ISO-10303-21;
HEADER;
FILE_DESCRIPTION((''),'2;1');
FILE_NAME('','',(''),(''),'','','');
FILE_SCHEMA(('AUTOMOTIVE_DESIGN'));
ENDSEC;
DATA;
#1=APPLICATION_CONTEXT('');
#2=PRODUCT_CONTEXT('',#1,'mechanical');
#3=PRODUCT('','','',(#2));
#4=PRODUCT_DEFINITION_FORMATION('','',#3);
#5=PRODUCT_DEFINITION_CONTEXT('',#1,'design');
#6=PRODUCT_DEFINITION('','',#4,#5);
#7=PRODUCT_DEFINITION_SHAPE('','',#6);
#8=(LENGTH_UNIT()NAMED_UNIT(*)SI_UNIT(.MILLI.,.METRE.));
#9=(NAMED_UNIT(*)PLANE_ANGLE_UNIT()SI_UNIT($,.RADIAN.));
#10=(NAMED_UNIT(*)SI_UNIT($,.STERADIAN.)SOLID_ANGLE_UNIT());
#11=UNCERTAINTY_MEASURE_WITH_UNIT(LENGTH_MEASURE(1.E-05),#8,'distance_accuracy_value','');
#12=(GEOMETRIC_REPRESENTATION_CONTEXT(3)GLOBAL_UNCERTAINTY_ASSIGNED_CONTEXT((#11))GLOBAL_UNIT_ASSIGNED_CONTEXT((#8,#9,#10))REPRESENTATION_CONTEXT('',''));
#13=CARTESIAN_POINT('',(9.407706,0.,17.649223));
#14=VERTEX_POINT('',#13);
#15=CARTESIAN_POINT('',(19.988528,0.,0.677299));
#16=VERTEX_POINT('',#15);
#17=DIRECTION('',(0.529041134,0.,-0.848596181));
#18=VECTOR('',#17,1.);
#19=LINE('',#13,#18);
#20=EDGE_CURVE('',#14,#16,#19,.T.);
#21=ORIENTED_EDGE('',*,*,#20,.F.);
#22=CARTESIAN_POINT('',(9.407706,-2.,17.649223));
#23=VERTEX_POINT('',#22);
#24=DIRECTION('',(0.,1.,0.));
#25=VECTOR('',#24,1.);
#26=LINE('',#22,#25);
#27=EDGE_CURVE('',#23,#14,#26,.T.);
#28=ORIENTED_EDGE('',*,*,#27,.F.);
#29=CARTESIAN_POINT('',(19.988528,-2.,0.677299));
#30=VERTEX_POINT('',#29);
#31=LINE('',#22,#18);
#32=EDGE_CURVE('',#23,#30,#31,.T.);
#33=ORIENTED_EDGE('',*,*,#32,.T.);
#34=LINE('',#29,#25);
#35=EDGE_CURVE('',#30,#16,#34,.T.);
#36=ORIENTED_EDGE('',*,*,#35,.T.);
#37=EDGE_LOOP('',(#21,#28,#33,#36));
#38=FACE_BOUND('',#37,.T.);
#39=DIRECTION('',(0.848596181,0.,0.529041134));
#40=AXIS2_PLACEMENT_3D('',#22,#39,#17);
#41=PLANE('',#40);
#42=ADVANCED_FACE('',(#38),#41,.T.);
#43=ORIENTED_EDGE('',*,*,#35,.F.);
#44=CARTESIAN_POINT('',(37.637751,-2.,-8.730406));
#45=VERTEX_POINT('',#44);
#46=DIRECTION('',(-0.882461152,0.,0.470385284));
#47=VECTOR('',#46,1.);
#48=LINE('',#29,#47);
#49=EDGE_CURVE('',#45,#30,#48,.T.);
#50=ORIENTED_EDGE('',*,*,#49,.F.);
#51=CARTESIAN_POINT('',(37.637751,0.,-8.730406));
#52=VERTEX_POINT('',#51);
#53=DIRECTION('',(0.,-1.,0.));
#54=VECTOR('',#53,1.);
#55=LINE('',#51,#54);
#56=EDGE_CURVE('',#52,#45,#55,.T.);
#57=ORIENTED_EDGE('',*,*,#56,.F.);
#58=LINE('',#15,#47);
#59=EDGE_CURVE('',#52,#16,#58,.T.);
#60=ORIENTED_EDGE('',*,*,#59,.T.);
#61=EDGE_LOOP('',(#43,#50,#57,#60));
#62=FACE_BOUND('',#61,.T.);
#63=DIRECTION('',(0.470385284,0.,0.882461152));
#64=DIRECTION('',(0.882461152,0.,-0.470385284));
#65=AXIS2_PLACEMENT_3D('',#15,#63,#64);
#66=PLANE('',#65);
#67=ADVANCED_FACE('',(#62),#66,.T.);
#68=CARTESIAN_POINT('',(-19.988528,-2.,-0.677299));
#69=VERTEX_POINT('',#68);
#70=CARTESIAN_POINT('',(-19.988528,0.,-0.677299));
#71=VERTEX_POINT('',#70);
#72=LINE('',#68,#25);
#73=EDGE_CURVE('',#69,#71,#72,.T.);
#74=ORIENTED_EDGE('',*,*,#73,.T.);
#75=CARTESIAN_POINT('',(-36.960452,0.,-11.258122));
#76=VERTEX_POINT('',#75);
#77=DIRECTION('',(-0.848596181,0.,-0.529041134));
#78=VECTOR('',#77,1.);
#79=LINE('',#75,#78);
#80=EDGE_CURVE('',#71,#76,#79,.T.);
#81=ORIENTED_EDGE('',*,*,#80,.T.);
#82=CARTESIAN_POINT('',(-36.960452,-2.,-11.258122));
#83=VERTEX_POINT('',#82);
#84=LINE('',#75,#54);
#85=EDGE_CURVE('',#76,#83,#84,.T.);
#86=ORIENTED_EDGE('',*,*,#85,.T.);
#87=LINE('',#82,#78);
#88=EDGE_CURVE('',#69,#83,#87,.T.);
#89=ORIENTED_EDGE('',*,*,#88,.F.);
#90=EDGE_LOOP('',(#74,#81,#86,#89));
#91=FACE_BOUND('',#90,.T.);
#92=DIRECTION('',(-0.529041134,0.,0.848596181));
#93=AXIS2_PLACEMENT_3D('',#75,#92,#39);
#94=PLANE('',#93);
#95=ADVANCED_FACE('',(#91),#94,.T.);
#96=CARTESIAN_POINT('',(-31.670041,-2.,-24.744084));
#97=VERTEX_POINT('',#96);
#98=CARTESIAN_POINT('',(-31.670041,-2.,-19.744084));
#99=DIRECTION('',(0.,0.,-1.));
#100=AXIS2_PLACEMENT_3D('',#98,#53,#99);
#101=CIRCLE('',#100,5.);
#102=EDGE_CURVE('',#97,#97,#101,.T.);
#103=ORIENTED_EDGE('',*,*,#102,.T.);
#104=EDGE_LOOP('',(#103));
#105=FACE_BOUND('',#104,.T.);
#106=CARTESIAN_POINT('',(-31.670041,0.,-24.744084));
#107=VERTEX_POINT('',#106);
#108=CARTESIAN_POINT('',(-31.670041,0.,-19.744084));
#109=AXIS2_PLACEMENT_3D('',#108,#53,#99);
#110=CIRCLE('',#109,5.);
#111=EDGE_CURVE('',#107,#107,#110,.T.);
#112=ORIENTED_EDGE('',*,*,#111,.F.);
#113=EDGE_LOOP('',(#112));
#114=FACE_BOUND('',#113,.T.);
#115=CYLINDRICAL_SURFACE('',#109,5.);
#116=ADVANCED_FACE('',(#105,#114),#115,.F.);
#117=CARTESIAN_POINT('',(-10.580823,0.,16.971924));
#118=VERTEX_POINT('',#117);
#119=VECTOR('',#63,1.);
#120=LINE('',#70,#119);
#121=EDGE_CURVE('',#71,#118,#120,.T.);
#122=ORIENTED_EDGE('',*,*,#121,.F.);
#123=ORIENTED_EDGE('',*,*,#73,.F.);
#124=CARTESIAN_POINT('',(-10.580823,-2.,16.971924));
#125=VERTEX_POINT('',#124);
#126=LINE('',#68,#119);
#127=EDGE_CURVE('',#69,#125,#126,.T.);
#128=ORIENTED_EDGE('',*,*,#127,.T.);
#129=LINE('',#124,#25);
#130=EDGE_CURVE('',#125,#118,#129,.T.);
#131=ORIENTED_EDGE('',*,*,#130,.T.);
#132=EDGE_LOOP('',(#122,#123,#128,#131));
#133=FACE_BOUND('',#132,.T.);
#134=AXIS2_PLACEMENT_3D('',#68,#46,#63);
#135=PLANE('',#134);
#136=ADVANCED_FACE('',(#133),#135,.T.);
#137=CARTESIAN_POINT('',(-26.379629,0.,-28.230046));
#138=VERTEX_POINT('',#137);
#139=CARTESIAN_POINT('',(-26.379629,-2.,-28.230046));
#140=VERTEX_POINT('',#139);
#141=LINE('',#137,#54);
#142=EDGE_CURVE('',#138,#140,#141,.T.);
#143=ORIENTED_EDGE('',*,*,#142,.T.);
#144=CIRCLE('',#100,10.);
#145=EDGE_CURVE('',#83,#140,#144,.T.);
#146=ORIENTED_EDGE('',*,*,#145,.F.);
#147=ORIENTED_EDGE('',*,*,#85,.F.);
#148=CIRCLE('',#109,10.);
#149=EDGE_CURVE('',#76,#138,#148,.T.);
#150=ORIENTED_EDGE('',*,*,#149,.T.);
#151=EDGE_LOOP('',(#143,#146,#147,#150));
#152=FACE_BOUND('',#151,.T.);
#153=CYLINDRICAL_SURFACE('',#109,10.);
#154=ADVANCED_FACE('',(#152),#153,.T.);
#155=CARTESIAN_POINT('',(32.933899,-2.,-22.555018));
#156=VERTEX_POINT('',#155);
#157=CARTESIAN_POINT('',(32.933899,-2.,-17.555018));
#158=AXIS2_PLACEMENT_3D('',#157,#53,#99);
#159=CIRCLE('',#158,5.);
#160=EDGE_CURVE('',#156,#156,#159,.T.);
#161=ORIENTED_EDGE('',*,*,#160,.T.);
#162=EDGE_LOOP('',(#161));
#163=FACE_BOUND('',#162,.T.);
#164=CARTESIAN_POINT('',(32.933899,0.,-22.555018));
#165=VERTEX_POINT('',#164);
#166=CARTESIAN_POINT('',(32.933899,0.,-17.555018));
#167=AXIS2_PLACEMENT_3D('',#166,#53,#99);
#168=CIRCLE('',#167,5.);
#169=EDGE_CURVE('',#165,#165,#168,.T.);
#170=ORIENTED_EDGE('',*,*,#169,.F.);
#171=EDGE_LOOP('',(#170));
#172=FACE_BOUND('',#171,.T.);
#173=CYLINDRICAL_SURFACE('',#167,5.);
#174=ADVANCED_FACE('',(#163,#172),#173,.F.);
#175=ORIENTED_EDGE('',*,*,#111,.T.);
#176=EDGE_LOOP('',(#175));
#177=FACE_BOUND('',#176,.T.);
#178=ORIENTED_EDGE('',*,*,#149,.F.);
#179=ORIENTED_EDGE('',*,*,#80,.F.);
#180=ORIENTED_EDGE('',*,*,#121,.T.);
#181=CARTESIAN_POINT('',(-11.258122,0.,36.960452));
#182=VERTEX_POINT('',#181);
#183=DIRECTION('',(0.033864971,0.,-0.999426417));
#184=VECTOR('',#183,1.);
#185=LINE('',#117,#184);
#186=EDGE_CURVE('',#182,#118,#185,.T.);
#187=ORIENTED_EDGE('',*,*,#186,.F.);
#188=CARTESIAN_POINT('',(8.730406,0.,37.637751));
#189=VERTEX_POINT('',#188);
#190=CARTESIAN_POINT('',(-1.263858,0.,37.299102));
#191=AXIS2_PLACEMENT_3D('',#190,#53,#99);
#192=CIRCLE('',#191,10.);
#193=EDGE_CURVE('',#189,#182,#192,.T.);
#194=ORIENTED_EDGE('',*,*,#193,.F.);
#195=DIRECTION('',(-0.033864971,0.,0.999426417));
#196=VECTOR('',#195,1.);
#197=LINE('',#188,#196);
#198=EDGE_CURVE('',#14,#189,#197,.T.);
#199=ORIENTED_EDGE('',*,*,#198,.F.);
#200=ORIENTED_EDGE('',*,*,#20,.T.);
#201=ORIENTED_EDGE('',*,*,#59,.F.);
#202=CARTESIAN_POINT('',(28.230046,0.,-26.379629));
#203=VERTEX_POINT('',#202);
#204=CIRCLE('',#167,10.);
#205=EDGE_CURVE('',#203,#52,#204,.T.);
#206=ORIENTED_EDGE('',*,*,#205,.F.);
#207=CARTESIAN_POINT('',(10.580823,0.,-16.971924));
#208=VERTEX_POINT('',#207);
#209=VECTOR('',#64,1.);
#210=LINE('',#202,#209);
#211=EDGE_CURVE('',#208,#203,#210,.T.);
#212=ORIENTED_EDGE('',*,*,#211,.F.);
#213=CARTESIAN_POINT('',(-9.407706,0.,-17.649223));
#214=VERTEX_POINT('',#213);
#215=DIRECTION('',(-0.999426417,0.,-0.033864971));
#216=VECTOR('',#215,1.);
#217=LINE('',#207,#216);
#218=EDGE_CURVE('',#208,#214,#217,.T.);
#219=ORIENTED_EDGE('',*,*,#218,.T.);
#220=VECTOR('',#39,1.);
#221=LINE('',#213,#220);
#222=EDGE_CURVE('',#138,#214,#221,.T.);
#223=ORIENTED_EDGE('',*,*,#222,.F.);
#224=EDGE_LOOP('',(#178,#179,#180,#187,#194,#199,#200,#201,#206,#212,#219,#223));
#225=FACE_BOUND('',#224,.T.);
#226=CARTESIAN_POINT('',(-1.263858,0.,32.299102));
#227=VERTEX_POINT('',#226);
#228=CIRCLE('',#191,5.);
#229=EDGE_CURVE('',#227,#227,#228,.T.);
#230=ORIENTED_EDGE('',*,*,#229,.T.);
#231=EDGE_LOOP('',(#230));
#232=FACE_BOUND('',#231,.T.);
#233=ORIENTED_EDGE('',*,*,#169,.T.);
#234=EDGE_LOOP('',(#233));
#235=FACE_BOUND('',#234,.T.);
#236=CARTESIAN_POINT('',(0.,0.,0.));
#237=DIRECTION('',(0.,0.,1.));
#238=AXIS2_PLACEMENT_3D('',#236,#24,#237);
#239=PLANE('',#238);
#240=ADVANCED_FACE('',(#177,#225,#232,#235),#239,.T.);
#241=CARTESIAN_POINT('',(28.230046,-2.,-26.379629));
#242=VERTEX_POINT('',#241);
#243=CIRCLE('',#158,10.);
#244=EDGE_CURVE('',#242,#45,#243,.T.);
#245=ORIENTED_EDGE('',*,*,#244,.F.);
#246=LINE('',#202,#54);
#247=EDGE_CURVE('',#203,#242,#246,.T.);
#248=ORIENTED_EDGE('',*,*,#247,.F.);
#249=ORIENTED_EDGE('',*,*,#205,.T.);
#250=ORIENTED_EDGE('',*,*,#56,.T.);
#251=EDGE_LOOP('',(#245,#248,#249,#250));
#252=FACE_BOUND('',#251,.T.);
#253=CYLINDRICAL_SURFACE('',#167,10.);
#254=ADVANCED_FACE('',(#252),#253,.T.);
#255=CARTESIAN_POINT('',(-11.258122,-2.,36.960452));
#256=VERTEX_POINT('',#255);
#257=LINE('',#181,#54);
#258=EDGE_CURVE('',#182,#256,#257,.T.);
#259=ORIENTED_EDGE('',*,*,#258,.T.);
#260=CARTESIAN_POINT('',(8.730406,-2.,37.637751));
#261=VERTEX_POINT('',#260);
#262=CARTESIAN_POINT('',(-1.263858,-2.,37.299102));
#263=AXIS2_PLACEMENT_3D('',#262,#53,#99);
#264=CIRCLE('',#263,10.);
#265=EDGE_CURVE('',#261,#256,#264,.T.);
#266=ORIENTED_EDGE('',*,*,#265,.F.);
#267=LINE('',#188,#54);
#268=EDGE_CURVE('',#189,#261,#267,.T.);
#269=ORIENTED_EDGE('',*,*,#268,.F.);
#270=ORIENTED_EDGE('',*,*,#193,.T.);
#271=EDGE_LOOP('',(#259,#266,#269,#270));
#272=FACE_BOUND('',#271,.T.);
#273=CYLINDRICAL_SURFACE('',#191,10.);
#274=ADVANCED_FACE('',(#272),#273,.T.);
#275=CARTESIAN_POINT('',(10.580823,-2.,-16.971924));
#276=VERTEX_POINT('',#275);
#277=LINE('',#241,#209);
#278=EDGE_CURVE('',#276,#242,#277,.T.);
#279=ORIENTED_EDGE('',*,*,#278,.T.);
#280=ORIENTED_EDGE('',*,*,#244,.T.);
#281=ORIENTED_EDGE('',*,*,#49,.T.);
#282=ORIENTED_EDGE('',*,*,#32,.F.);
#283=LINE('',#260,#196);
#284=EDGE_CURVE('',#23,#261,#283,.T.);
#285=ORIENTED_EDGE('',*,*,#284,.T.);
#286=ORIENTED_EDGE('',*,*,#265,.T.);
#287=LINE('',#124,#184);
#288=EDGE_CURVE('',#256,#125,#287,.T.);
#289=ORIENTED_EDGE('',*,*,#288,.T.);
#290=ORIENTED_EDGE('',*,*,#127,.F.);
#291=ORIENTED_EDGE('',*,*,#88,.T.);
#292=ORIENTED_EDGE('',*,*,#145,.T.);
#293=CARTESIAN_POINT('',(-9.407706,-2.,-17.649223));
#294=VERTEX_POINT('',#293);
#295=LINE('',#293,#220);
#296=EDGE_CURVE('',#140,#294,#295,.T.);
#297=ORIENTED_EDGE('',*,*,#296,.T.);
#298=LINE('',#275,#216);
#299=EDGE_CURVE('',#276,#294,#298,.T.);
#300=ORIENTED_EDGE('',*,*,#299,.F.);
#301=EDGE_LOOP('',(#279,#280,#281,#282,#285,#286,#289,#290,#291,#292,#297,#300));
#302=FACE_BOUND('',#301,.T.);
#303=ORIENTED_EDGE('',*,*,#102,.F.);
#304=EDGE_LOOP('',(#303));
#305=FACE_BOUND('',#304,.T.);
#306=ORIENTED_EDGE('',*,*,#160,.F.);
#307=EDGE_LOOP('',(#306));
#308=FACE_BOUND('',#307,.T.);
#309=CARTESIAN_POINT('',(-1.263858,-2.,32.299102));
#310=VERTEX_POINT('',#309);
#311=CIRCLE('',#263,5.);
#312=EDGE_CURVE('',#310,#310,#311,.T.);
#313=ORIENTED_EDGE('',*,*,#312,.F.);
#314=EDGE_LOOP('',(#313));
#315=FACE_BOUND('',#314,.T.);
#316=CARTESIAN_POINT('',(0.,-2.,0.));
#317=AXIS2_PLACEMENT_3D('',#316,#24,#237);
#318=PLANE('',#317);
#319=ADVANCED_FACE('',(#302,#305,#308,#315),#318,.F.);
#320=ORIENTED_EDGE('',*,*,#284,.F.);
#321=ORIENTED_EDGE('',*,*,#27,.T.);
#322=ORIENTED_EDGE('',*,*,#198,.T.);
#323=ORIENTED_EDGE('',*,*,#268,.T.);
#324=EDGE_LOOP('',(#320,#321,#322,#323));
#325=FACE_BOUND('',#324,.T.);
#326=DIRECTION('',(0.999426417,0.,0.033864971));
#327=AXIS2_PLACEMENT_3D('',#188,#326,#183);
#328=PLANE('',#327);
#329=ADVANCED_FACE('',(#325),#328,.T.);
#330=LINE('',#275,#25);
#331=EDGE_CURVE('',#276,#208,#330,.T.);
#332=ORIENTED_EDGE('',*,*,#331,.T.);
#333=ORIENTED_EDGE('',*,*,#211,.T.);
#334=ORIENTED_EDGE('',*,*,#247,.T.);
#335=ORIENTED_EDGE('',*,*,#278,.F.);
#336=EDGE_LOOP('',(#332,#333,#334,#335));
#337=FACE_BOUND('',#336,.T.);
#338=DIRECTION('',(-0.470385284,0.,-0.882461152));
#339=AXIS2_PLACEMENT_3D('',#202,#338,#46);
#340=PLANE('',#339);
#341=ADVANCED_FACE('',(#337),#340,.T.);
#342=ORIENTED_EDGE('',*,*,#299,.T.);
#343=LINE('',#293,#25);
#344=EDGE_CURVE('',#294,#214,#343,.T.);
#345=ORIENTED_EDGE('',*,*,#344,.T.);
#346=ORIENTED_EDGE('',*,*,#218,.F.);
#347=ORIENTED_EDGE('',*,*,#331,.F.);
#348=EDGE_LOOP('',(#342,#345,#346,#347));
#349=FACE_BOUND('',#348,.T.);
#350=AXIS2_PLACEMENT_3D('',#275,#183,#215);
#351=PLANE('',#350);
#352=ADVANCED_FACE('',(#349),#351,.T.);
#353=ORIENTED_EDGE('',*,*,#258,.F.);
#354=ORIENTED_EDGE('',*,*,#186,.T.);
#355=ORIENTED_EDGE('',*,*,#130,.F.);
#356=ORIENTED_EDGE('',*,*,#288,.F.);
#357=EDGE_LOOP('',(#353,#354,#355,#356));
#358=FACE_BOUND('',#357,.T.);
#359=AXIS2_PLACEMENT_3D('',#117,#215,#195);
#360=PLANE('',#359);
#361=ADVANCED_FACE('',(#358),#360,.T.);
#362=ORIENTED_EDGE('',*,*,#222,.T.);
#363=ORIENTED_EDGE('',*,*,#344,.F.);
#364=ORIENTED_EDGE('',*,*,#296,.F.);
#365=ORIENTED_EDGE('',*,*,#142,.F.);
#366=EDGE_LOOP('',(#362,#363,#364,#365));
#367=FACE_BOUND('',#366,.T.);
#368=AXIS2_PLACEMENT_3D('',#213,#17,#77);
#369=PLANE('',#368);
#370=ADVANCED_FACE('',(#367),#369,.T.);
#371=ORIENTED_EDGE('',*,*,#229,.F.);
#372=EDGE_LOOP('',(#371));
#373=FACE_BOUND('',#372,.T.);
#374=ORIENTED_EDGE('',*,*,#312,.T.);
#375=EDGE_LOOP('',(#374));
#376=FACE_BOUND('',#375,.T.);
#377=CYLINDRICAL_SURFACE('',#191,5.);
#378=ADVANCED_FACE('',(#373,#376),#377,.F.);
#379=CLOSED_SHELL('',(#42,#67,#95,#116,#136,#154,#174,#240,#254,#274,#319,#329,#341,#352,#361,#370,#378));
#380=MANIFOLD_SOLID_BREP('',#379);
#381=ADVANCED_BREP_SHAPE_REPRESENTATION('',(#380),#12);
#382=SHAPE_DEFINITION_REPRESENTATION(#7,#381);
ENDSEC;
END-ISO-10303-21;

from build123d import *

# Parameters (mm, degrees)
BASE_FLANGE1_DEPTH = 2
SKETCH9_R          = 5
TAB1_DEPTH         = 2


# Sheet-metal steps are written as plain solids
with BuildPart() as part:
    # Sketch1 → Base-Flange1 (new body)
    with BuildSketch(Plane(origin=(0, 0, 0), x_dir=(1, 0, 0), z_dir=(0, 1, 0))):
        Polygon((10.580822677, 16.971923623), (-9.40770567, 17.649223043), (-19.988528347, 0.67729942), (-10.580822677, -16.971923623), (9.40770567, -17.649223043), (19.988528347, -0.67729942), align=None)
    extrude(amount=-BASE_FLANGE1_DEPTH)

    # Sketch9 → Tab1 (add)
    # profile 1 of 3: a face of its own
    with BuildSketch(Plane.XZ.offset(2)):
        with BuildLine():
            Line((-10.580822677, 16.971923623), (-11.258122097, 36.960451971))
            ThreePointArc((-11.258122097, 36.960451971), (-1.602507633, 47.293365854), (8.73040625, 37.63775139))
            Line((8.73040625, 37.63775139), (9.40770567, 17.649223043))
            Line((9.40770567, 17.649223043), (-10.580822677, 16.971923623))
        make_face()
        with Locations(Location((-1.263857923, 37.299101681, 0), (0, 0, 270))):
            Circle(SKETCH9_R, mode=Mode.SUBTRACT)
    # profile 2 of 3: a face of its own
    with BuildSketch(Plane.XZ.offset(2)):
        with BuildLine():
            Line((19.988528347, 0.67729942), (37.63775139, -8.73040625))
            ThreePointArc((37.63775139, -8.73040625), (41.758510077, -22.258870607), (28.23004572, -26.379629293))
            Line((28.23004572, -26.379629293), (10.580822677, -16.971923623))
            Line((10.580822677, -16.971923623), (19.988528347, 0.67729942))
        make_face()
        with Locations(Location((32.933898555, -17.555017772, 0), (0, 0, 270))):
            Circle(SKETCH9_R, mode=Mode.SUBTRACT)
    # profile 3 of 3: a face of its own
    with BuildSketch(Plane.XZ.offset(2)):
        with BuildLine():
            Line((-9.40770567, -17.649223043), (-26.379629293, -28.23004572))
            ThreePointArc((-26.379629293, -28.23004572), (-40.156002444, -25.034495247), (-36.960451971, -11.258122097))
            Line((-36.960451971, -11.258122097), (-19.988528347, -0.67729942))
            Line((-19.988528347, -0.67729942), (-9.40770567, -17.649223043))
        make_face()
        with Locations(Location((-31.670040632, -19.744083909, 0), (0, 0, 270))):
            Circle(SKETCH9_R, mode=Mode.SUBTRACT)
    extrude(amount=-TAB1_DEPTH)


solid = part.part
